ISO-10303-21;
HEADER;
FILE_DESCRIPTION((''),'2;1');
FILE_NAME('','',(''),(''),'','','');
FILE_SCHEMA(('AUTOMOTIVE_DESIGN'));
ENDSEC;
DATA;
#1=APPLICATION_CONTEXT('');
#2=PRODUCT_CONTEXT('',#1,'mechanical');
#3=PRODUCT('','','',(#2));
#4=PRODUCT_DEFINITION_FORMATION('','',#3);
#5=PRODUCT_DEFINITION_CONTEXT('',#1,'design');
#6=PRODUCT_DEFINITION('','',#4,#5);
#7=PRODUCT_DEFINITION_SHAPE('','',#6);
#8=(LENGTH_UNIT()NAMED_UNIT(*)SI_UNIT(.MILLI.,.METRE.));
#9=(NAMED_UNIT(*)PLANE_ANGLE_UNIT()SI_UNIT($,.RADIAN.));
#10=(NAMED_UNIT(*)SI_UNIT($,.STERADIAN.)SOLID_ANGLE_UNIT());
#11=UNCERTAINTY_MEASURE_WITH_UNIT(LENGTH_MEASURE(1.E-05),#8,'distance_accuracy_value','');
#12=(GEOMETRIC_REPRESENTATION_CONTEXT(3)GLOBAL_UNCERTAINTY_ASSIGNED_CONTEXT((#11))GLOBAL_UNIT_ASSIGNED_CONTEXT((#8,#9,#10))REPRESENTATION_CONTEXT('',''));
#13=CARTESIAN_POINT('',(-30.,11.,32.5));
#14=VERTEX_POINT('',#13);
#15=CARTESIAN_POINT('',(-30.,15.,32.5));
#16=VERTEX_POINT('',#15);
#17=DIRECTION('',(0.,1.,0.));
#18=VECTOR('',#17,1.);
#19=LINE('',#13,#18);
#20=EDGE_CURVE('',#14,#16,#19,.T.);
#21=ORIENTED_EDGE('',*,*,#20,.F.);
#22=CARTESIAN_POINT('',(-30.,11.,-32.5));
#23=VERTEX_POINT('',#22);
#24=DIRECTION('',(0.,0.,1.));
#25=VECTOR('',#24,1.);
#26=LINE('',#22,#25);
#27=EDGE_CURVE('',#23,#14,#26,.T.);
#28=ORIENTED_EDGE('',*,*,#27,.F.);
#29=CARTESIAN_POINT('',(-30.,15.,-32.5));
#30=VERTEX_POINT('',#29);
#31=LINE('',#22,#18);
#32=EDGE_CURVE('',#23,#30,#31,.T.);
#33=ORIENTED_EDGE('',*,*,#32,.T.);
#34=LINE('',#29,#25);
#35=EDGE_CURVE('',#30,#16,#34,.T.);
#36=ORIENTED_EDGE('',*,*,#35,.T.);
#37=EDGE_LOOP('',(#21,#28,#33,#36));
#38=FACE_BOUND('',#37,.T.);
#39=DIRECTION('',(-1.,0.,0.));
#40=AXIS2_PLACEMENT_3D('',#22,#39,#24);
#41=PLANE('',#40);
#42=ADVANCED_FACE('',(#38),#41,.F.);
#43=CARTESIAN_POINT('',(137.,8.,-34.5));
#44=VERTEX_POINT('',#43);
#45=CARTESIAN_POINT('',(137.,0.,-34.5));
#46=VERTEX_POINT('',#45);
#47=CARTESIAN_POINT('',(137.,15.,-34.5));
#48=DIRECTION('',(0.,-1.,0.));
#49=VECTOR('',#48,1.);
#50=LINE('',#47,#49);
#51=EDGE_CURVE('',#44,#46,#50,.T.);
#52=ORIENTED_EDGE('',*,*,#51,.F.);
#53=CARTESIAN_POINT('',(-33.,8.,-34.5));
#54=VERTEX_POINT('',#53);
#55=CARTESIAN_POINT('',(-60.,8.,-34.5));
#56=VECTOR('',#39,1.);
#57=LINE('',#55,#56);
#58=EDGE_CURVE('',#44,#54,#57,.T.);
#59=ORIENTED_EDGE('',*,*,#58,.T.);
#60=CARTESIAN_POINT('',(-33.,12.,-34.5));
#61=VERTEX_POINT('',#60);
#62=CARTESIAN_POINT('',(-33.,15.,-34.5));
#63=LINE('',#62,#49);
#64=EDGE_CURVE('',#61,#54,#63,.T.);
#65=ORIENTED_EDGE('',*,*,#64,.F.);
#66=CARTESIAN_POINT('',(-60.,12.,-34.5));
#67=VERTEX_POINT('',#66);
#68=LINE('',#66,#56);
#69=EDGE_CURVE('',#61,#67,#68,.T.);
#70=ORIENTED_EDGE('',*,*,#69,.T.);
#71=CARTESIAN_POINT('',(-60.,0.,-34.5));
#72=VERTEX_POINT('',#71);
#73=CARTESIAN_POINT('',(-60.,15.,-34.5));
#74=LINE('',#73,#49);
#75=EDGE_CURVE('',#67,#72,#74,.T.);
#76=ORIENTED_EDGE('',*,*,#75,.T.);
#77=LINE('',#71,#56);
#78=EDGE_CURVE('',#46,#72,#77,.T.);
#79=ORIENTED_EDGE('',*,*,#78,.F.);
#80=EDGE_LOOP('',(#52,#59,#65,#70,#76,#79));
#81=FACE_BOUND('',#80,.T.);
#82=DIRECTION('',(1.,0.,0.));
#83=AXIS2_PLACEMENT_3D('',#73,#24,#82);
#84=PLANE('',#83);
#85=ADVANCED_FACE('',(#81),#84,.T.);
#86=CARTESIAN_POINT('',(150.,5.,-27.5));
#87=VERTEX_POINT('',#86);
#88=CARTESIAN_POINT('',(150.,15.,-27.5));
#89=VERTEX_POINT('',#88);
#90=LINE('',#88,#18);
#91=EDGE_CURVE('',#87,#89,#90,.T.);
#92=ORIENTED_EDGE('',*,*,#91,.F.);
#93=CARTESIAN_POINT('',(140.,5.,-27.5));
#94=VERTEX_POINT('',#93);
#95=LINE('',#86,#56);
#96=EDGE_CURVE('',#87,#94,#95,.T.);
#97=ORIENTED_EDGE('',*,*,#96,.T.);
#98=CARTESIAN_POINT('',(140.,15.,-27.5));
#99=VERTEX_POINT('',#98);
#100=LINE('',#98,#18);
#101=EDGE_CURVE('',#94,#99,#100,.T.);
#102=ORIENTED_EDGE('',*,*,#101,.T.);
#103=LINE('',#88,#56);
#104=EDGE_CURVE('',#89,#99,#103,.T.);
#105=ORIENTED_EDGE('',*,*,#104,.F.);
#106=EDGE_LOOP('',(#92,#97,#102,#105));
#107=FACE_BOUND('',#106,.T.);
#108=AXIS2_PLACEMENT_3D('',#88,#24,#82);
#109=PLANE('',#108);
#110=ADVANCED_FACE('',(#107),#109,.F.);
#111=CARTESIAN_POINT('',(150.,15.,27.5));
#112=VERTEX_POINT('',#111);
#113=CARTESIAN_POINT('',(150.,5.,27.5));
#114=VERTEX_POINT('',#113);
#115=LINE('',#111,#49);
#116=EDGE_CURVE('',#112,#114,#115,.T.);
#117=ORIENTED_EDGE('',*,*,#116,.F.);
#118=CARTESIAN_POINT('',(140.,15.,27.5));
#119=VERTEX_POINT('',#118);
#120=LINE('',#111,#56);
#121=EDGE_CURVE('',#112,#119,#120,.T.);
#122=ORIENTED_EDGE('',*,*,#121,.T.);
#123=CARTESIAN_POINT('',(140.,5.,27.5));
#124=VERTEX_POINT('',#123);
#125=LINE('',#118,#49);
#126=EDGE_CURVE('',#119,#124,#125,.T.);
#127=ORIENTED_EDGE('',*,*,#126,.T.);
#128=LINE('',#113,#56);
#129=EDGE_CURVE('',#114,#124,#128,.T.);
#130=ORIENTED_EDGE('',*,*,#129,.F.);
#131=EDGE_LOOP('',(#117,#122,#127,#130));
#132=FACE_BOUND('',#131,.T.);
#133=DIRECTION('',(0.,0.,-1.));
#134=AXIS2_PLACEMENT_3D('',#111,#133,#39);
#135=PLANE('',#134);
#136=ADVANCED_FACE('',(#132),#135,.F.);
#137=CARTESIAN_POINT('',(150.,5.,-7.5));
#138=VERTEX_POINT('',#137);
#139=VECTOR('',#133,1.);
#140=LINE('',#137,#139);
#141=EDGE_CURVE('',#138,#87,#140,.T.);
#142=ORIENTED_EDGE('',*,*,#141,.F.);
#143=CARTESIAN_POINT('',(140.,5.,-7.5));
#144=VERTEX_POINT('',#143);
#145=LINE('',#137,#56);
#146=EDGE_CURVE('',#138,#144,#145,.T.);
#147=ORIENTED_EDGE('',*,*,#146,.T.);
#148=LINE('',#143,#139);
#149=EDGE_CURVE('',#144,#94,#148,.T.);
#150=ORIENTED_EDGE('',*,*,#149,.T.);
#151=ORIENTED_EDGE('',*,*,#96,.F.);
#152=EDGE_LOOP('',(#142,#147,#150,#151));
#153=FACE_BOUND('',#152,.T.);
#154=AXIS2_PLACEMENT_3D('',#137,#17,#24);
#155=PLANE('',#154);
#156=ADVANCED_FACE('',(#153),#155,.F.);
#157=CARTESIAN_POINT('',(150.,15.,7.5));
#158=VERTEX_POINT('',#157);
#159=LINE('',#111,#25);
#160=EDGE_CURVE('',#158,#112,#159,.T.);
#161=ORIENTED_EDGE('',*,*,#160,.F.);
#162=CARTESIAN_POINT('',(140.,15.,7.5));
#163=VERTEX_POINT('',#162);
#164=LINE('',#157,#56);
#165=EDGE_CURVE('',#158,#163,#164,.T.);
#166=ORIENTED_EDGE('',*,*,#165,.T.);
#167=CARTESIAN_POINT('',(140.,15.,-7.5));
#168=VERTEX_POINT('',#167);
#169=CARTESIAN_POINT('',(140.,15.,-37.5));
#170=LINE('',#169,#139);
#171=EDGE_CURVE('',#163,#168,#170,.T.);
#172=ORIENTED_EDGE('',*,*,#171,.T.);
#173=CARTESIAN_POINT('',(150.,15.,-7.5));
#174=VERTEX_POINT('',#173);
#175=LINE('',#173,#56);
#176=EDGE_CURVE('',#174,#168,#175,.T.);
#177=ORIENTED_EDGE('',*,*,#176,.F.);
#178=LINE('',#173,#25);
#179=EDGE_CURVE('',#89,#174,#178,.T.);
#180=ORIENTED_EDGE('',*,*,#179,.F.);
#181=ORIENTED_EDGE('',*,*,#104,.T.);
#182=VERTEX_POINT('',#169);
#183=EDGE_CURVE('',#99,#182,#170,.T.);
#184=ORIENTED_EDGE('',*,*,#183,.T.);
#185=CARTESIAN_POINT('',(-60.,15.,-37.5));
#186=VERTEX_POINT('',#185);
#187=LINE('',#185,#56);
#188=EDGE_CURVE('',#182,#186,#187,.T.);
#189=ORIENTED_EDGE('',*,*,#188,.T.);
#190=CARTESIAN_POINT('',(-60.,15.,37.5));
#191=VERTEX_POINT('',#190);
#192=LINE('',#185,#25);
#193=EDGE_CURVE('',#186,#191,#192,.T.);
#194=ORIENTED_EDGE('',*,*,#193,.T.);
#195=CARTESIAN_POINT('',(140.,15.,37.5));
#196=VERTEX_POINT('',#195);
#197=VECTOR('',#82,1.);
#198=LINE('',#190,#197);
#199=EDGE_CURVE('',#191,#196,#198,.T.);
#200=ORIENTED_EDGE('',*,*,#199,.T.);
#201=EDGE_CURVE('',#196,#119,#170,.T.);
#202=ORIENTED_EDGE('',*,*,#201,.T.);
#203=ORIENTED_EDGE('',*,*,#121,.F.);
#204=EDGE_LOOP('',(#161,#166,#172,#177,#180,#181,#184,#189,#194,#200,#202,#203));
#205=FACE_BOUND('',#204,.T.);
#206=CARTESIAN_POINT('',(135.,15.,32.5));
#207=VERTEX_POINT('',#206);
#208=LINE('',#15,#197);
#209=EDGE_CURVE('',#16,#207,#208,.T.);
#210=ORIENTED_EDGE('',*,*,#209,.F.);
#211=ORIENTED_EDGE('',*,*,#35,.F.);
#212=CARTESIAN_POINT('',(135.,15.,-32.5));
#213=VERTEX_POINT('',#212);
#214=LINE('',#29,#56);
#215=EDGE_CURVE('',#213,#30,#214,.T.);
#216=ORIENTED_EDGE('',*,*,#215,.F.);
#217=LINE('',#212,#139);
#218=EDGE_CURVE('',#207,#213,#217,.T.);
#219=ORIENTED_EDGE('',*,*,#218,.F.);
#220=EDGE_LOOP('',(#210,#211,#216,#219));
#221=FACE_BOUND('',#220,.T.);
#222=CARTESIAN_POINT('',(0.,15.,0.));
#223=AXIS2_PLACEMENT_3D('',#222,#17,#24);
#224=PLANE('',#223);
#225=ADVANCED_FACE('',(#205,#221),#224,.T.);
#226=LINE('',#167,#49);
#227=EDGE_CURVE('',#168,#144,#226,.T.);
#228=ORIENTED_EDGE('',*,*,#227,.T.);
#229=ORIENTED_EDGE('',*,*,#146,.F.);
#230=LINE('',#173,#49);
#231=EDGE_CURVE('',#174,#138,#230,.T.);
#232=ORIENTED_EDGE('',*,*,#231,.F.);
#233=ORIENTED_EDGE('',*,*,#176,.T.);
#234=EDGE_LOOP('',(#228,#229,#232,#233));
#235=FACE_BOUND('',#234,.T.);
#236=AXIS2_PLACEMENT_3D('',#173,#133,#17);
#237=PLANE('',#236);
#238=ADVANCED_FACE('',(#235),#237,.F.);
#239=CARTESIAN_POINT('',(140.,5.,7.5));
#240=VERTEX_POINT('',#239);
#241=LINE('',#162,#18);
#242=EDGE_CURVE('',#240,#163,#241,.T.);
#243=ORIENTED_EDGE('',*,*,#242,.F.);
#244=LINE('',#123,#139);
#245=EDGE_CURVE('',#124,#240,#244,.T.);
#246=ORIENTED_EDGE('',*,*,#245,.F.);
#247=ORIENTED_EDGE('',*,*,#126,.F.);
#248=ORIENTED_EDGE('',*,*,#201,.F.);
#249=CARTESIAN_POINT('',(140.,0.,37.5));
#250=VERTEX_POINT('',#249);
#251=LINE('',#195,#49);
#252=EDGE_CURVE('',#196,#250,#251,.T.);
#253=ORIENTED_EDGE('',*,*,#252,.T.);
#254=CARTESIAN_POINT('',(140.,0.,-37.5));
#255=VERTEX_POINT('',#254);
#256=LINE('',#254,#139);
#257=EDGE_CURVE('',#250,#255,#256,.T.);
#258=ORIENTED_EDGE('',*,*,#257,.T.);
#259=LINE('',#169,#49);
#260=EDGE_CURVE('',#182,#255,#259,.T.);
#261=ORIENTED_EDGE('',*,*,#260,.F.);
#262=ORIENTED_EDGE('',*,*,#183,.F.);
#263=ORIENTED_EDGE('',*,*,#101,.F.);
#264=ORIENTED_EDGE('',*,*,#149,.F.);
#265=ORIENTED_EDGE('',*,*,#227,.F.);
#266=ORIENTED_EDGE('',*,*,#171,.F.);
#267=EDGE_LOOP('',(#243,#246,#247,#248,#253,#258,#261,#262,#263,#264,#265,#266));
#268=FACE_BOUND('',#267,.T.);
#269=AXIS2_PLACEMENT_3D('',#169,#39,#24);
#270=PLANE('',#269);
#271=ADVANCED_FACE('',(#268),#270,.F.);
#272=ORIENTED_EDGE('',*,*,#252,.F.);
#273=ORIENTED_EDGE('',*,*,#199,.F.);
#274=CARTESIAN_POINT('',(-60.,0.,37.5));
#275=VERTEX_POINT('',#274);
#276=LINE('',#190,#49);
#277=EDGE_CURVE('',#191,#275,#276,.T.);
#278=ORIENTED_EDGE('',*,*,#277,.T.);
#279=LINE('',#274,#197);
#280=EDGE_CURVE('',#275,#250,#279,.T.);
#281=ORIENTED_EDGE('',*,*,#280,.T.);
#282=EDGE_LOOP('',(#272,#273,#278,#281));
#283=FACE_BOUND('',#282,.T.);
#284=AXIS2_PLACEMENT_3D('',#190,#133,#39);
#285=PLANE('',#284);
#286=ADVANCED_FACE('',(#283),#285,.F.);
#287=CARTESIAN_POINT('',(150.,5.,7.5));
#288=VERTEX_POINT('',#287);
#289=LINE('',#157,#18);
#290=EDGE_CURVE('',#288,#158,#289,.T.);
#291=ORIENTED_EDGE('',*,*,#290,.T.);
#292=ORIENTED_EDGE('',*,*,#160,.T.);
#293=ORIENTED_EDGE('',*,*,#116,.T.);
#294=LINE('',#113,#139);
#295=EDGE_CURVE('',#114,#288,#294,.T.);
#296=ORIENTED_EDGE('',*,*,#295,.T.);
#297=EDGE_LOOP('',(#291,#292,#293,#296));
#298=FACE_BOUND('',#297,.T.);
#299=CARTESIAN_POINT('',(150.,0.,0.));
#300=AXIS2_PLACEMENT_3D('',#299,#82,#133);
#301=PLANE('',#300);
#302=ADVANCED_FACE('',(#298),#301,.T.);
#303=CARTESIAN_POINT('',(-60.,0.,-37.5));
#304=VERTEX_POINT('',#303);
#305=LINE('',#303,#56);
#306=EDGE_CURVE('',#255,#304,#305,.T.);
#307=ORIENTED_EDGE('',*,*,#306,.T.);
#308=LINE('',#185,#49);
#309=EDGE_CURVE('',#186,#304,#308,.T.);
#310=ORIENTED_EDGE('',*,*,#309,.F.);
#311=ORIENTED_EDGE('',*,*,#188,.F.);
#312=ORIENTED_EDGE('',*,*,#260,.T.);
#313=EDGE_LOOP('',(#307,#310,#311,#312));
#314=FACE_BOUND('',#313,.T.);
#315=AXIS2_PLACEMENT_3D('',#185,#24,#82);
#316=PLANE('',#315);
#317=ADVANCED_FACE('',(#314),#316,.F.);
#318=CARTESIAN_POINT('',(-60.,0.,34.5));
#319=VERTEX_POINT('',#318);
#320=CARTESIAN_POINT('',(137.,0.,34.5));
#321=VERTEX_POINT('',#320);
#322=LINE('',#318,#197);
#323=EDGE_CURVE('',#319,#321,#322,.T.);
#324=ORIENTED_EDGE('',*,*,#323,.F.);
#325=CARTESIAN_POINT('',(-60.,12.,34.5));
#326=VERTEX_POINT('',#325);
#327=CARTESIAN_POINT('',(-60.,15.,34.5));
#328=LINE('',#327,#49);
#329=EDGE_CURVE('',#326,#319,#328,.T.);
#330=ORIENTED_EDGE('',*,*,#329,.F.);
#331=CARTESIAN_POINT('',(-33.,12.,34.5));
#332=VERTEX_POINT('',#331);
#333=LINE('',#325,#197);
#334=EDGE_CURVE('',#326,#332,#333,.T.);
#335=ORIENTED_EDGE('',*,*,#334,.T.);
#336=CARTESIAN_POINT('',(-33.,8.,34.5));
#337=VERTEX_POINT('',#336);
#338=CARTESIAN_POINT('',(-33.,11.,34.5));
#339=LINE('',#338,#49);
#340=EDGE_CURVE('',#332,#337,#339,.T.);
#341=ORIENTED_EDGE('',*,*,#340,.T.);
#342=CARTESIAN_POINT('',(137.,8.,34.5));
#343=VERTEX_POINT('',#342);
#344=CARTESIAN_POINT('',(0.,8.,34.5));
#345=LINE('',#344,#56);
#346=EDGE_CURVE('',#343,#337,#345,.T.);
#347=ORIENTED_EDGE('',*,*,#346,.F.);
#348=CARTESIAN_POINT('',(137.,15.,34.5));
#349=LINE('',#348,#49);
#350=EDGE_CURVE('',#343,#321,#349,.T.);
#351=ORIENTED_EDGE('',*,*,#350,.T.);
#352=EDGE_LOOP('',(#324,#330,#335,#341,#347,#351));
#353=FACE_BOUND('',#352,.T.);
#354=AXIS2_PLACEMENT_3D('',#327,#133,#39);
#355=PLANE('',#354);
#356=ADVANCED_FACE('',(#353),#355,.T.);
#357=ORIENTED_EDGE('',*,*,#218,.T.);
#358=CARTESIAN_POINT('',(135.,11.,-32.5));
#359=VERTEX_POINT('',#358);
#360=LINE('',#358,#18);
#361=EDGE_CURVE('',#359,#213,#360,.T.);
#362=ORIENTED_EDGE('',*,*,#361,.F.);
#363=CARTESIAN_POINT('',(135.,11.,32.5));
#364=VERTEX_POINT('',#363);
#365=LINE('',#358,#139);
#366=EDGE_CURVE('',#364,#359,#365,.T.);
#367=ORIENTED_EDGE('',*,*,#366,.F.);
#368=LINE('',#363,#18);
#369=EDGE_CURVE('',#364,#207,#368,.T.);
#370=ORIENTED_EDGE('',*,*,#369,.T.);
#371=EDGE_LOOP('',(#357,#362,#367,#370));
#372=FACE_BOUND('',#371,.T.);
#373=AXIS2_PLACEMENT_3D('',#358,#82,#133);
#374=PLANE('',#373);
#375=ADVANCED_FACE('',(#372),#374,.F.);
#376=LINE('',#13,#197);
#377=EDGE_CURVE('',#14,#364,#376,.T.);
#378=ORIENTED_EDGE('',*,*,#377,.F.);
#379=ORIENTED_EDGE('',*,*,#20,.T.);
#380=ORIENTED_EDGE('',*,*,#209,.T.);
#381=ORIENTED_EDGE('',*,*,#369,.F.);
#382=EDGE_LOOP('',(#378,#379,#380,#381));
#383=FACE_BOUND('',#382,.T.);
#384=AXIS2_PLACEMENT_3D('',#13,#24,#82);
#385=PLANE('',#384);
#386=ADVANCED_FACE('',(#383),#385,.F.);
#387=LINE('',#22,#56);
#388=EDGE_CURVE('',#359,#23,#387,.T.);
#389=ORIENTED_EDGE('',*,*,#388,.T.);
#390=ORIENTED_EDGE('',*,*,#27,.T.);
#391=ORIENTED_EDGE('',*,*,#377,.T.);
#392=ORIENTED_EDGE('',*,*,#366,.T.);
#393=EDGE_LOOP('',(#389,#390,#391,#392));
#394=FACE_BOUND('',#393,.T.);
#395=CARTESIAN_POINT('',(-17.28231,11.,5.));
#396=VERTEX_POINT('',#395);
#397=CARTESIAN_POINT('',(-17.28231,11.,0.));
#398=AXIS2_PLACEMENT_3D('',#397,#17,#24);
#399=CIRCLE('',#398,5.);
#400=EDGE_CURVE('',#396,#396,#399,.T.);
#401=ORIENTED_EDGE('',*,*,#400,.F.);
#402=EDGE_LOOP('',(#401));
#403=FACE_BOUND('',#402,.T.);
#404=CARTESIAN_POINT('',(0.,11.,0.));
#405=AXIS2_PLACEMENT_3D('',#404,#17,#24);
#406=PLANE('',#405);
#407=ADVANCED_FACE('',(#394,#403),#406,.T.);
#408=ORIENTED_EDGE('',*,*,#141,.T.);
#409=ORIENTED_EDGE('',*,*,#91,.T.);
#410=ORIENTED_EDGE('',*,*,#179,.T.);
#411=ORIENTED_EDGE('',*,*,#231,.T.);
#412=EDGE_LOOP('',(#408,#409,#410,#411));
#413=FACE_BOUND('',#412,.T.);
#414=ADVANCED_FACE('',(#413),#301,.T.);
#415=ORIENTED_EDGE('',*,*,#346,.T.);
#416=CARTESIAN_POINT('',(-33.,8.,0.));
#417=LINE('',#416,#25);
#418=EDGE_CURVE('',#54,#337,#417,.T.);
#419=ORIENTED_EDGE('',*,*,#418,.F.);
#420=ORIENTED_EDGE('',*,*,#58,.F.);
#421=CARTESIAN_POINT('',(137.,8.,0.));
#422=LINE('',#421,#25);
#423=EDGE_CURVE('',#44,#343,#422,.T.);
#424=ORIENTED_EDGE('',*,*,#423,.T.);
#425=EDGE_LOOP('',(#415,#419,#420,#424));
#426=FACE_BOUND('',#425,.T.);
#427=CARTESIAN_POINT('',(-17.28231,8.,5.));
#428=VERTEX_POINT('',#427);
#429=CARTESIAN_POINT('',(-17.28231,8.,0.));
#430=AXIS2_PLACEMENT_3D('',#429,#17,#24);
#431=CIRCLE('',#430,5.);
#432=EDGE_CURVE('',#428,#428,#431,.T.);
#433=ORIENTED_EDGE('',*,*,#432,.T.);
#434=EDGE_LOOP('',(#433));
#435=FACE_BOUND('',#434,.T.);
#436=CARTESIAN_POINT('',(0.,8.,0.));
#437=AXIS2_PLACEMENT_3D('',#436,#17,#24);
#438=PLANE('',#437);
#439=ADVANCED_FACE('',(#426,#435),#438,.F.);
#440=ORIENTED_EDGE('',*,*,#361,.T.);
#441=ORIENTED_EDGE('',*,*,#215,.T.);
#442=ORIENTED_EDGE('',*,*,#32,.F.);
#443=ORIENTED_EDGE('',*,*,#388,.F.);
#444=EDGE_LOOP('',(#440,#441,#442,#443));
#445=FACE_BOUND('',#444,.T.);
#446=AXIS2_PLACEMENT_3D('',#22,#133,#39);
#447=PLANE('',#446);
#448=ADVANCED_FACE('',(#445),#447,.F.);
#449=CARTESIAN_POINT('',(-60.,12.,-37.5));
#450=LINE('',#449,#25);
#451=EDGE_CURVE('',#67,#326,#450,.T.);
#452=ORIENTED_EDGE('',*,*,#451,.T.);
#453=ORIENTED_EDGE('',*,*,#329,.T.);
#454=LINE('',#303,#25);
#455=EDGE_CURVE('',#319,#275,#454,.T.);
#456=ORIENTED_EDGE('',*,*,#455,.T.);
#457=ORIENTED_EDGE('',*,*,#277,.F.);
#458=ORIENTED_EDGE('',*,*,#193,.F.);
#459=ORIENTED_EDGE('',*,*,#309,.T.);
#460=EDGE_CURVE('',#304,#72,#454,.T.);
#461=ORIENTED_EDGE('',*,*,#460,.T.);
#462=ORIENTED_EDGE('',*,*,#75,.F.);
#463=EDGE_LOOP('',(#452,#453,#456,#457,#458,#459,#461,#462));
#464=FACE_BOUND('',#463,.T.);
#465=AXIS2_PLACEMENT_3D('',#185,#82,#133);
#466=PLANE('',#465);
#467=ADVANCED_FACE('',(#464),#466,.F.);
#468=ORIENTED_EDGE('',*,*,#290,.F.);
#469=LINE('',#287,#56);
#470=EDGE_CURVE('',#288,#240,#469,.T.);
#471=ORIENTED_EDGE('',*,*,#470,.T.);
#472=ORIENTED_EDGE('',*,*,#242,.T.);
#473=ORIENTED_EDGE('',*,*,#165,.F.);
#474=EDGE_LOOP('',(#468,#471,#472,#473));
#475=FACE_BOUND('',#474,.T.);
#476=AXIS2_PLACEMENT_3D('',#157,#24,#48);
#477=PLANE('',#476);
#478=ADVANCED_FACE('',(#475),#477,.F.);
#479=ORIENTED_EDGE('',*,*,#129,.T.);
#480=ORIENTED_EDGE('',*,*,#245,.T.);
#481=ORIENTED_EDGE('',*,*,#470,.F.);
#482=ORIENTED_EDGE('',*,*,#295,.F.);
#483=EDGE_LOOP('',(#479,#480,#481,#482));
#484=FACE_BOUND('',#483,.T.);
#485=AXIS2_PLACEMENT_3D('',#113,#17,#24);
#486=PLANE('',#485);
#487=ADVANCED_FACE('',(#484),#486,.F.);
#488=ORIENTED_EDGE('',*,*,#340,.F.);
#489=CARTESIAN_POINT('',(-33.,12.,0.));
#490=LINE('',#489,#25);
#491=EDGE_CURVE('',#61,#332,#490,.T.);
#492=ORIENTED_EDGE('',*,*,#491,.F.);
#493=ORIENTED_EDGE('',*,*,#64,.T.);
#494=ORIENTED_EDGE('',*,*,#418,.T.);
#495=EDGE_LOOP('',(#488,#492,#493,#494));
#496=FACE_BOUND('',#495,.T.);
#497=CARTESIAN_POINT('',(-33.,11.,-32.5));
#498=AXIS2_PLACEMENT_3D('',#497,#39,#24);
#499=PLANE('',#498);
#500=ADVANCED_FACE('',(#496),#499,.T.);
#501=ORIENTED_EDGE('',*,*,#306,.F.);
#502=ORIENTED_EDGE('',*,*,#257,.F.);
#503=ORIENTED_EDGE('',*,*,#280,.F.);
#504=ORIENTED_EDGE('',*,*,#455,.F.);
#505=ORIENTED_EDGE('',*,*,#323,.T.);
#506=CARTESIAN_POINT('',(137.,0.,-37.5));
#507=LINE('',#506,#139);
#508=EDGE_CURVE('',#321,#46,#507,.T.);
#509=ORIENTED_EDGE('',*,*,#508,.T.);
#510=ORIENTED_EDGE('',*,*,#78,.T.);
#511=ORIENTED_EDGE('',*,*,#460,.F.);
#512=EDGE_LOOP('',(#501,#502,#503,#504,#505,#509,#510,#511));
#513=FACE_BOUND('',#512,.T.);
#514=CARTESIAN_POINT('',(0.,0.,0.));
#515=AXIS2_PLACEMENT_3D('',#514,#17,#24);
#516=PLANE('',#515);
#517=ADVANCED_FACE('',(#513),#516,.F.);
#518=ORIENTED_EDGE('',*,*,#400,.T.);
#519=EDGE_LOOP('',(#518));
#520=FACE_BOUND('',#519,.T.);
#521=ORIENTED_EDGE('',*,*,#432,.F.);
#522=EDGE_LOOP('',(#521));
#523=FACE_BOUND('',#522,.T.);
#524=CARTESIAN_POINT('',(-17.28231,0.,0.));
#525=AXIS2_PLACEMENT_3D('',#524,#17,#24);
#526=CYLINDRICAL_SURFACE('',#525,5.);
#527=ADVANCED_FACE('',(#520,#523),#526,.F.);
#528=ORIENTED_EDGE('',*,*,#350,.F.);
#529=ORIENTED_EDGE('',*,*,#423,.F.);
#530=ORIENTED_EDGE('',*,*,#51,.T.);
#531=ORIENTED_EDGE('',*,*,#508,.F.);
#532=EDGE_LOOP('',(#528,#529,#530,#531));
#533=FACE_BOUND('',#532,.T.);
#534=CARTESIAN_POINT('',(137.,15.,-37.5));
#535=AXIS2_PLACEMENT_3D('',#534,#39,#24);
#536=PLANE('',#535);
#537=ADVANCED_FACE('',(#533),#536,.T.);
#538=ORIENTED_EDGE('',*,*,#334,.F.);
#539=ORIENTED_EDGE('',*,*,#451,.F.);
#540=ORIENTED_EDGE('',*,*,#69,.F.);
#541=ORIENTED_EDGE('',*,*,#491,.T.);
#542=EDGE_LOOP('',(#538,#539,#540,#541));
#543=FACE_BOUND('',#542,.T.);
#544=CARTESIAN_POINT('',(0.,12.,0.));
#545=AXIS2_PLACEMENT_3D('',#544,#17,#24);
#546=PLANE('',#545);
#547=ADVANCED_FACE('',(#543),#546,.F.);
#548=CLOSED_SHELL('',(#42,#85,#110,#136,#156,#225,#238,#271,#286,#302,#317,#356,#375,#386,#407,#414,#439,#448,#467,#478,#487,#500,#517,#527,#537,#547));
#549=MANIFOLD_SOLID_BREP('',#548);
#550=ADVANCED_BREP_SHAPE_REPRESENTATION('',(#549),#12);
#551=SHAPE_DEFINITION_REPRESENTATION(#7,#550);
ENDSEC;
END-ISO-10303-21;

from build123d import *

# Parameters (mm, degrees)
SKETCH1_W           = 200
SKETCH1_H           = 75
BOSS_EXTRUDE1_DEPTH = 15
SKETCH9_W           = 165
SKETCH9_H           = 65
CUT_EXTRUDE5_DEPTH  = 4
SHELL3_START        = -34.5
SHELL3_DEPTH        = 69
SKETCH14_W          = 20
SKETCH14_H          = 10
BOSS_EXTRUDE5_DEPTH = 10
SKETCH15_R          = 5
CUT_EXTRUDE7_DEPTH  = 156.007257895


# Read off the part's stored shape, not the designer's step: Shell3
with BuildPart() as part:
    # Sketch1 → Boss-Extrude1 (new body)
    with BuildSketch(Plane(origin=(0, 0, 0), x_dir=(1, 0, 0), z_dir=(0, 1, 0))):
        with Locations((40, 0)):
            Rectangle(SKETCH1_W, SKETCH1_H)
    extrude(amount=BOSS_EXTRUDE1_DEPTH)

    # Sketch9 → Cut-Extrude5 (cut)
    with BuildSketch(Plane(origin=(0, 15, 0), x_dir=(1, 0, 0), z_dir=(0, 1, 0))):
        with Locations((52.5, 0)):
            Rectangle(SKETCH9_W, SKETCH9_H)
    extrude(amount=-CUT_EXTRUDE5_DEPTH, mode=Mode.SUBTRACT)

    # Shell3 outline → Shell3 (cut)
    with BuildSketch(Plane.XY.offset(SHELL3_START)):
        Polygon((137, 0), (137, 8), (-33, 8), (-33, 12), (-60, 12), (-60, 0), align=None)
    extrude(amount=SHELL3_DEPTH, mode=Mode.SUBTRACT)

    # Sketch14 → Boss-Extrude5 (add)
    with BuildSketch(Plane(origin=(140, 0, 0), x_dir=(0, 0, -1), z_dir=(1, 0, 0))):
        with Locations((-17.5, 10)):
            Rectangle(SKETCH14_W, SKETCH14_H)
        with Locations((17.5, 10)):
            Rectangle(SKETCH14_W, SKETCH14_H)
    extrude(amount=BOSS_EXTRUDE5_DEPTH)

    # Sketch15 → Cut-Extrude7 (cut, through all)
    with BuildSketch(Plane(origin=(0, 11, 0), x_dir=(1, 0, 0), z_dir=(0, 1, 0))):
        with Locations(Location((-17.28231035, 0, 0), (0, 0, 270))):
            Circle(SKETCH15_R)
    extrude(amount=-CUT_EXTRUDE7_DEPTH, mode=Mode.SUBTRACT)


solid = part.part
